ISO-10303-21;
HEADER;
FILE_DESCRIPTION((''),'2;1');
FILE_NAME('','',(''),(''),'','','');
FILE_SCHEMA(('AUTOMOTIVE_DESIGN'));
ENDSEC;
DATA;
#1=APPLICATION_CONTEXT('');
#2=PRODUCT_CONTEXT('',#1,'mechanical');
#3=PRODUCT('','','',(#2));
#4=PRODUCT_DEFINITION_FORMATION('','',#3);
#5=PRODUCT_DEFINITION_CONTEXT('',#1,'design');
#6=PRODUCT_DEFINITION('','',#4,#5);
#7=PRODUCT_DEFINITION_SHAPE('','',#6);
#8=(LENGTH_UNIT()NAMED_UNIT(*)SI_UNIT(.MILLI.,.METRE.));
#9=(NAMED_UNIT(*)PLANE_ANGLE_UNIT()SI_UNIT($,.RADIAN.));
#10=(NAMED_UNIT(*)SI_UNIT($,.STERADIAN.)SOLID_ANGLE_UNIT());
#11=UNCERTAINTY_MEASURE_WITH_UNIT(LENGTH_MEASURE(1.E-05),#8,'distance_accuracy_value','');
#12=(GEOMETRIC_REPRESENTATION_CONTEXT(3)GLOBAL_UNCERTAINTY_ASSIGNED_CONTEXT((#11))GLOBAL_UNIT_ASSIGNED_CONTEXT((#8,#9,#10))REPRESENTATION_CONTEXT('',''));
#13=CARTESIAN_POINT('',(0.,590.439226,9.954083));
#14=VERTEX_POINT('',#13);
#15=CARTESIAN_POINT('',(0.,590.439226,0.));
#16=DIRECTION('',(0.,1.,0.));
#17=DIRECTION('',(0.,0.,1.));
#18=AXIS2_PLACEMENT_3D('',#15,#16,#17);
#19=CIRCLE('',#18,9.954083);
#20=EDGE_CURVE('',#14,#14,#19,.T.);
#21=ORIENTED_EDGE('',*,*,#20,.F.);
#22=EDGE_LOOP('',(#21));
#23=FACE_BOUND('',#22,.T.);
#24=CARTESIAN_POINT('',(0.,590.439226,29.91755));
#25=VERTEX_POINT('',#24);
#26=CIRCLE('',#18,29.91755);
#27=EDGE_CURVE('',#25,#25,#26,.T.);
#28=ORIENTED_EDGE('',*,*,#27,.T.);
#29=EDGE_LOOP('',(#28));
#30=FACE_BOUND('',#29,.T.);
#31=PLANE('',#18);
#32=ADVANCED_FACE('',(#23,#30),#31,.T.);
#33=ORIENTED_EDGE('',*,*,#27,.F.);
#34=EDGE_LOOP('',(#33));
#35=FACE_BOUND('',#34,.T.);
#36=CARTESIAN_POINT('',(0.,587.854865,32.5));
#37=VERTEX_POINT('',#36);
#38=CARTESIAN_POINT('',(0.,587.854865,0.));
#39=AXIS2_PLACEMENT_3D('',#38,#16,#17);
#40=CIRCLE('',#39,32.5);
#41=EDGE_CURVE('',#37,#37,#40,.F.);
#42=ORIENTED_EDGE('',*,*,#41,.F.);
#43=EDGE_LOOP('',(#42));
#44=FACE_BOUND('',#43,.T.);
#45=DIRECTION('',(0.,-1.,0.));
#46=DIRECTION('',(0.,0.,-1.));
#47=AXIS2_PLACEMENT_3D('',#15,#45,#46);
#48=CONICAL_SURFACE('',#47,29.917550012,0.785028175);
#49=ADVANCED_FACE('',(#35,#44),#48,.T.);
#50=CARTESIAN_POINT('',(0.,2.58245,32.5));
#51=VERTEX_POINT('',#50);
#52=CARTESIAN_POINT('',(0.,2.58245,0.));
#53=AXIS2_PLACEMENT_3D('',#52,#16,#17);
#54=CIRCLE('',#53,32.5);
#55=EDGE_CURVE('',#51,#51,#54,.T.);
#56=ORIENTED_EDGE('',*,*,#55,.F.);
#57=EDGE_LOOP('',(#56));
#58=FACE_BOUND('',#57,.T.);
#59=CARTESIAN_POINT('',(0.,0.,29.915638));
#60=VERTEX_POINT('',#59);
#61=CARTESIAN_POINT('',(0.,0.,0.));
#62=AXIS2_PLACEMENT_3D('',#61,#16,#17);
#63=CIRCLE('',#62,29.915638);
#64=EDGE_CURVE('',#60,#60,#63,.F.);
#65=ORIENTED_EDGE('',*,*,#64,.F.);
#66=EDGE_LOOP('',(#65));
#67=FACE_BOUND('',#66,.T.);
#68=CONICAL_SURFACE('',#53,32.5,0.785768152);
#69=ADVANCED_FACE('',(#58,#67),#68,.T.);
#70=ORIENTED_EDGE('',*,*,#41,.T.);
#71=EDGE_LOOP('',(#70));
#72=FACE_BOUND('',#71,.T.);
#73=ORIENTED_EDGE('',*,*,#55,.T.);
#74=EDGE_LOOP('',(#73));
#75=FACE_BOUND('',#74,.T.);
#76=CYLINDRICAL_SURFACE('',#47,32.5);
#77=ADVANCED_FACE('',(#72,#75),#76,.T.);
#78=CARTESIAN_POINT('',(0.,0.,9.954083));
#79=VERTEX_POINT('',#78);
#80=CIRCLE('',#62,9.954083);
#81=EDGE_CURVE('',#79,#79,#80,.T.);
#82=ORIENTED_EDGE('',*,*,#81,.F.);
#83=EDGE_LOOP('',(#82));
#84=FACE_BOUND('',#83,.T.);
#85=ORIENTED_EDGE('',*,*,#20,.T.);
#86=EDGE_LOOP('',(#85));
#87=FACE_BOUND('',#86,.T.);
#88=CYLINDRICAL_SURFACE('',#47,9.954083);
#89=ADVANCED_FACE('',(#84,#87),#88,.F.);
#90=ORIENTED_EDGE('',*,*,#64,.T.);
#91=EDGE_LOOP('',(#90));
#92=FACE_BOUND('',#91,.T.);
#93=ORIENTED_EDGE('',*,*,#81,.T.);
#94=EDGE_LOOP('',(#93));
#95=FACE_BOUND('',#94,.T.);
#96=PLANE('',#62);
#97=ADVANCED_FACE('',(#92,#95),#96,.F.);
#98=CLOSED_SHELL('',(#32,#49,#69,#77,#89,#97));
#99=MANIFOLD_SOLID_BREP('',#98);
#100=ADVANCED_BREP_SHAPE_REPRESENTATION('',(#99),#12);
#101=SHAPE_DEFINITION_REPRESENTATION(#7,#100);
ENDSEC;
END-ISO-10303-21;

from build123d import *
from OCP.BRepFilletAPI import BRepFilletAPI_MakeChamfer

# Parameters (mm, degrees)
SKETCH1_R           = 32.5
BOSS_EXTRUDE1_DEPTH = 590.439226282
SKETCH2_R           = 9.954082652
CUT_EXTRUDE1_DEPTH  = 593.22544688
CHAMFER1_SIZE       = 2.584361648
CHAMFER1_SIZE2      = 2.582449988


with BuildPart() as part:
    # Sketch1 → Boss-Extrude1 (new body)
    with BuildSketch(Plane(origin=(0, 0, 0), x_dir=(1, 0, 0), z_dir=(0, 1, 0))):
        Circle(SKETCH1_R)
    extrude(amount=BOSS_EXTRUDE1_DEPTH)

    # Sketch2 → Cut-Extrude1 (cut, through all)
    with BuildSketch(Plane(origin=(0, 0, 0), x_dir=(1, 0, 0), z_dir=(0, 1, 0))):
        Circle(SKETCH2_R)
    extrude(amount=CUT_EXTRUDE1_DEPTH, mode=Mode.SUBTRACT)

    # Chamfer1: one chamfer whose edges measure the first distance from different faces: ONE call of the kernel's chamfer builder (chamfer() names one face for all edges)
    chamfer1_edges_1 = [part.edges().sort_by_distance(p)[0] for p in [
        (-32.5, 590.439226282, 0),
    ]]
    chamfer1_side_1 = [part.faces().sort_by_distance(p)[0] for p in [
        (-32.5, 295.219613141, 0),
    ]]
    chamfer1_edges_2 = [part.edges().sort_by_distance(p)[0] for p in [
        (-32.5, 0, 0),
    ]]
    chamfer1_side_2 = [part.faces().sort_by_distance(p)[0] for p in [
        (-31.580761184, 0, 0),
    ]]
    chamfer1 = BRepFilletAPI_MakeChamfer(part.part.solid().wrapped)
    for e in chamfer1_edges_1:
        chamfer1.Add(CHAMFER1_SIZE, CHAMFER1_SIZE2, e.wrapped, chamfer1_side_1[0].wrapped)  # the first distance lies on this face
    for e in chamfer1_edges_2:
        chamfer1.Add(CHAMFER1_SIZE, CHAMFER1_SIZE2, e.wrapped, chamfer1_side_2[0].wrapped)  # the first distance lies on this face
    add(Compound.cast(chamfer1.Shape()), mode=Mode.REPLACE)


solid = part.part
